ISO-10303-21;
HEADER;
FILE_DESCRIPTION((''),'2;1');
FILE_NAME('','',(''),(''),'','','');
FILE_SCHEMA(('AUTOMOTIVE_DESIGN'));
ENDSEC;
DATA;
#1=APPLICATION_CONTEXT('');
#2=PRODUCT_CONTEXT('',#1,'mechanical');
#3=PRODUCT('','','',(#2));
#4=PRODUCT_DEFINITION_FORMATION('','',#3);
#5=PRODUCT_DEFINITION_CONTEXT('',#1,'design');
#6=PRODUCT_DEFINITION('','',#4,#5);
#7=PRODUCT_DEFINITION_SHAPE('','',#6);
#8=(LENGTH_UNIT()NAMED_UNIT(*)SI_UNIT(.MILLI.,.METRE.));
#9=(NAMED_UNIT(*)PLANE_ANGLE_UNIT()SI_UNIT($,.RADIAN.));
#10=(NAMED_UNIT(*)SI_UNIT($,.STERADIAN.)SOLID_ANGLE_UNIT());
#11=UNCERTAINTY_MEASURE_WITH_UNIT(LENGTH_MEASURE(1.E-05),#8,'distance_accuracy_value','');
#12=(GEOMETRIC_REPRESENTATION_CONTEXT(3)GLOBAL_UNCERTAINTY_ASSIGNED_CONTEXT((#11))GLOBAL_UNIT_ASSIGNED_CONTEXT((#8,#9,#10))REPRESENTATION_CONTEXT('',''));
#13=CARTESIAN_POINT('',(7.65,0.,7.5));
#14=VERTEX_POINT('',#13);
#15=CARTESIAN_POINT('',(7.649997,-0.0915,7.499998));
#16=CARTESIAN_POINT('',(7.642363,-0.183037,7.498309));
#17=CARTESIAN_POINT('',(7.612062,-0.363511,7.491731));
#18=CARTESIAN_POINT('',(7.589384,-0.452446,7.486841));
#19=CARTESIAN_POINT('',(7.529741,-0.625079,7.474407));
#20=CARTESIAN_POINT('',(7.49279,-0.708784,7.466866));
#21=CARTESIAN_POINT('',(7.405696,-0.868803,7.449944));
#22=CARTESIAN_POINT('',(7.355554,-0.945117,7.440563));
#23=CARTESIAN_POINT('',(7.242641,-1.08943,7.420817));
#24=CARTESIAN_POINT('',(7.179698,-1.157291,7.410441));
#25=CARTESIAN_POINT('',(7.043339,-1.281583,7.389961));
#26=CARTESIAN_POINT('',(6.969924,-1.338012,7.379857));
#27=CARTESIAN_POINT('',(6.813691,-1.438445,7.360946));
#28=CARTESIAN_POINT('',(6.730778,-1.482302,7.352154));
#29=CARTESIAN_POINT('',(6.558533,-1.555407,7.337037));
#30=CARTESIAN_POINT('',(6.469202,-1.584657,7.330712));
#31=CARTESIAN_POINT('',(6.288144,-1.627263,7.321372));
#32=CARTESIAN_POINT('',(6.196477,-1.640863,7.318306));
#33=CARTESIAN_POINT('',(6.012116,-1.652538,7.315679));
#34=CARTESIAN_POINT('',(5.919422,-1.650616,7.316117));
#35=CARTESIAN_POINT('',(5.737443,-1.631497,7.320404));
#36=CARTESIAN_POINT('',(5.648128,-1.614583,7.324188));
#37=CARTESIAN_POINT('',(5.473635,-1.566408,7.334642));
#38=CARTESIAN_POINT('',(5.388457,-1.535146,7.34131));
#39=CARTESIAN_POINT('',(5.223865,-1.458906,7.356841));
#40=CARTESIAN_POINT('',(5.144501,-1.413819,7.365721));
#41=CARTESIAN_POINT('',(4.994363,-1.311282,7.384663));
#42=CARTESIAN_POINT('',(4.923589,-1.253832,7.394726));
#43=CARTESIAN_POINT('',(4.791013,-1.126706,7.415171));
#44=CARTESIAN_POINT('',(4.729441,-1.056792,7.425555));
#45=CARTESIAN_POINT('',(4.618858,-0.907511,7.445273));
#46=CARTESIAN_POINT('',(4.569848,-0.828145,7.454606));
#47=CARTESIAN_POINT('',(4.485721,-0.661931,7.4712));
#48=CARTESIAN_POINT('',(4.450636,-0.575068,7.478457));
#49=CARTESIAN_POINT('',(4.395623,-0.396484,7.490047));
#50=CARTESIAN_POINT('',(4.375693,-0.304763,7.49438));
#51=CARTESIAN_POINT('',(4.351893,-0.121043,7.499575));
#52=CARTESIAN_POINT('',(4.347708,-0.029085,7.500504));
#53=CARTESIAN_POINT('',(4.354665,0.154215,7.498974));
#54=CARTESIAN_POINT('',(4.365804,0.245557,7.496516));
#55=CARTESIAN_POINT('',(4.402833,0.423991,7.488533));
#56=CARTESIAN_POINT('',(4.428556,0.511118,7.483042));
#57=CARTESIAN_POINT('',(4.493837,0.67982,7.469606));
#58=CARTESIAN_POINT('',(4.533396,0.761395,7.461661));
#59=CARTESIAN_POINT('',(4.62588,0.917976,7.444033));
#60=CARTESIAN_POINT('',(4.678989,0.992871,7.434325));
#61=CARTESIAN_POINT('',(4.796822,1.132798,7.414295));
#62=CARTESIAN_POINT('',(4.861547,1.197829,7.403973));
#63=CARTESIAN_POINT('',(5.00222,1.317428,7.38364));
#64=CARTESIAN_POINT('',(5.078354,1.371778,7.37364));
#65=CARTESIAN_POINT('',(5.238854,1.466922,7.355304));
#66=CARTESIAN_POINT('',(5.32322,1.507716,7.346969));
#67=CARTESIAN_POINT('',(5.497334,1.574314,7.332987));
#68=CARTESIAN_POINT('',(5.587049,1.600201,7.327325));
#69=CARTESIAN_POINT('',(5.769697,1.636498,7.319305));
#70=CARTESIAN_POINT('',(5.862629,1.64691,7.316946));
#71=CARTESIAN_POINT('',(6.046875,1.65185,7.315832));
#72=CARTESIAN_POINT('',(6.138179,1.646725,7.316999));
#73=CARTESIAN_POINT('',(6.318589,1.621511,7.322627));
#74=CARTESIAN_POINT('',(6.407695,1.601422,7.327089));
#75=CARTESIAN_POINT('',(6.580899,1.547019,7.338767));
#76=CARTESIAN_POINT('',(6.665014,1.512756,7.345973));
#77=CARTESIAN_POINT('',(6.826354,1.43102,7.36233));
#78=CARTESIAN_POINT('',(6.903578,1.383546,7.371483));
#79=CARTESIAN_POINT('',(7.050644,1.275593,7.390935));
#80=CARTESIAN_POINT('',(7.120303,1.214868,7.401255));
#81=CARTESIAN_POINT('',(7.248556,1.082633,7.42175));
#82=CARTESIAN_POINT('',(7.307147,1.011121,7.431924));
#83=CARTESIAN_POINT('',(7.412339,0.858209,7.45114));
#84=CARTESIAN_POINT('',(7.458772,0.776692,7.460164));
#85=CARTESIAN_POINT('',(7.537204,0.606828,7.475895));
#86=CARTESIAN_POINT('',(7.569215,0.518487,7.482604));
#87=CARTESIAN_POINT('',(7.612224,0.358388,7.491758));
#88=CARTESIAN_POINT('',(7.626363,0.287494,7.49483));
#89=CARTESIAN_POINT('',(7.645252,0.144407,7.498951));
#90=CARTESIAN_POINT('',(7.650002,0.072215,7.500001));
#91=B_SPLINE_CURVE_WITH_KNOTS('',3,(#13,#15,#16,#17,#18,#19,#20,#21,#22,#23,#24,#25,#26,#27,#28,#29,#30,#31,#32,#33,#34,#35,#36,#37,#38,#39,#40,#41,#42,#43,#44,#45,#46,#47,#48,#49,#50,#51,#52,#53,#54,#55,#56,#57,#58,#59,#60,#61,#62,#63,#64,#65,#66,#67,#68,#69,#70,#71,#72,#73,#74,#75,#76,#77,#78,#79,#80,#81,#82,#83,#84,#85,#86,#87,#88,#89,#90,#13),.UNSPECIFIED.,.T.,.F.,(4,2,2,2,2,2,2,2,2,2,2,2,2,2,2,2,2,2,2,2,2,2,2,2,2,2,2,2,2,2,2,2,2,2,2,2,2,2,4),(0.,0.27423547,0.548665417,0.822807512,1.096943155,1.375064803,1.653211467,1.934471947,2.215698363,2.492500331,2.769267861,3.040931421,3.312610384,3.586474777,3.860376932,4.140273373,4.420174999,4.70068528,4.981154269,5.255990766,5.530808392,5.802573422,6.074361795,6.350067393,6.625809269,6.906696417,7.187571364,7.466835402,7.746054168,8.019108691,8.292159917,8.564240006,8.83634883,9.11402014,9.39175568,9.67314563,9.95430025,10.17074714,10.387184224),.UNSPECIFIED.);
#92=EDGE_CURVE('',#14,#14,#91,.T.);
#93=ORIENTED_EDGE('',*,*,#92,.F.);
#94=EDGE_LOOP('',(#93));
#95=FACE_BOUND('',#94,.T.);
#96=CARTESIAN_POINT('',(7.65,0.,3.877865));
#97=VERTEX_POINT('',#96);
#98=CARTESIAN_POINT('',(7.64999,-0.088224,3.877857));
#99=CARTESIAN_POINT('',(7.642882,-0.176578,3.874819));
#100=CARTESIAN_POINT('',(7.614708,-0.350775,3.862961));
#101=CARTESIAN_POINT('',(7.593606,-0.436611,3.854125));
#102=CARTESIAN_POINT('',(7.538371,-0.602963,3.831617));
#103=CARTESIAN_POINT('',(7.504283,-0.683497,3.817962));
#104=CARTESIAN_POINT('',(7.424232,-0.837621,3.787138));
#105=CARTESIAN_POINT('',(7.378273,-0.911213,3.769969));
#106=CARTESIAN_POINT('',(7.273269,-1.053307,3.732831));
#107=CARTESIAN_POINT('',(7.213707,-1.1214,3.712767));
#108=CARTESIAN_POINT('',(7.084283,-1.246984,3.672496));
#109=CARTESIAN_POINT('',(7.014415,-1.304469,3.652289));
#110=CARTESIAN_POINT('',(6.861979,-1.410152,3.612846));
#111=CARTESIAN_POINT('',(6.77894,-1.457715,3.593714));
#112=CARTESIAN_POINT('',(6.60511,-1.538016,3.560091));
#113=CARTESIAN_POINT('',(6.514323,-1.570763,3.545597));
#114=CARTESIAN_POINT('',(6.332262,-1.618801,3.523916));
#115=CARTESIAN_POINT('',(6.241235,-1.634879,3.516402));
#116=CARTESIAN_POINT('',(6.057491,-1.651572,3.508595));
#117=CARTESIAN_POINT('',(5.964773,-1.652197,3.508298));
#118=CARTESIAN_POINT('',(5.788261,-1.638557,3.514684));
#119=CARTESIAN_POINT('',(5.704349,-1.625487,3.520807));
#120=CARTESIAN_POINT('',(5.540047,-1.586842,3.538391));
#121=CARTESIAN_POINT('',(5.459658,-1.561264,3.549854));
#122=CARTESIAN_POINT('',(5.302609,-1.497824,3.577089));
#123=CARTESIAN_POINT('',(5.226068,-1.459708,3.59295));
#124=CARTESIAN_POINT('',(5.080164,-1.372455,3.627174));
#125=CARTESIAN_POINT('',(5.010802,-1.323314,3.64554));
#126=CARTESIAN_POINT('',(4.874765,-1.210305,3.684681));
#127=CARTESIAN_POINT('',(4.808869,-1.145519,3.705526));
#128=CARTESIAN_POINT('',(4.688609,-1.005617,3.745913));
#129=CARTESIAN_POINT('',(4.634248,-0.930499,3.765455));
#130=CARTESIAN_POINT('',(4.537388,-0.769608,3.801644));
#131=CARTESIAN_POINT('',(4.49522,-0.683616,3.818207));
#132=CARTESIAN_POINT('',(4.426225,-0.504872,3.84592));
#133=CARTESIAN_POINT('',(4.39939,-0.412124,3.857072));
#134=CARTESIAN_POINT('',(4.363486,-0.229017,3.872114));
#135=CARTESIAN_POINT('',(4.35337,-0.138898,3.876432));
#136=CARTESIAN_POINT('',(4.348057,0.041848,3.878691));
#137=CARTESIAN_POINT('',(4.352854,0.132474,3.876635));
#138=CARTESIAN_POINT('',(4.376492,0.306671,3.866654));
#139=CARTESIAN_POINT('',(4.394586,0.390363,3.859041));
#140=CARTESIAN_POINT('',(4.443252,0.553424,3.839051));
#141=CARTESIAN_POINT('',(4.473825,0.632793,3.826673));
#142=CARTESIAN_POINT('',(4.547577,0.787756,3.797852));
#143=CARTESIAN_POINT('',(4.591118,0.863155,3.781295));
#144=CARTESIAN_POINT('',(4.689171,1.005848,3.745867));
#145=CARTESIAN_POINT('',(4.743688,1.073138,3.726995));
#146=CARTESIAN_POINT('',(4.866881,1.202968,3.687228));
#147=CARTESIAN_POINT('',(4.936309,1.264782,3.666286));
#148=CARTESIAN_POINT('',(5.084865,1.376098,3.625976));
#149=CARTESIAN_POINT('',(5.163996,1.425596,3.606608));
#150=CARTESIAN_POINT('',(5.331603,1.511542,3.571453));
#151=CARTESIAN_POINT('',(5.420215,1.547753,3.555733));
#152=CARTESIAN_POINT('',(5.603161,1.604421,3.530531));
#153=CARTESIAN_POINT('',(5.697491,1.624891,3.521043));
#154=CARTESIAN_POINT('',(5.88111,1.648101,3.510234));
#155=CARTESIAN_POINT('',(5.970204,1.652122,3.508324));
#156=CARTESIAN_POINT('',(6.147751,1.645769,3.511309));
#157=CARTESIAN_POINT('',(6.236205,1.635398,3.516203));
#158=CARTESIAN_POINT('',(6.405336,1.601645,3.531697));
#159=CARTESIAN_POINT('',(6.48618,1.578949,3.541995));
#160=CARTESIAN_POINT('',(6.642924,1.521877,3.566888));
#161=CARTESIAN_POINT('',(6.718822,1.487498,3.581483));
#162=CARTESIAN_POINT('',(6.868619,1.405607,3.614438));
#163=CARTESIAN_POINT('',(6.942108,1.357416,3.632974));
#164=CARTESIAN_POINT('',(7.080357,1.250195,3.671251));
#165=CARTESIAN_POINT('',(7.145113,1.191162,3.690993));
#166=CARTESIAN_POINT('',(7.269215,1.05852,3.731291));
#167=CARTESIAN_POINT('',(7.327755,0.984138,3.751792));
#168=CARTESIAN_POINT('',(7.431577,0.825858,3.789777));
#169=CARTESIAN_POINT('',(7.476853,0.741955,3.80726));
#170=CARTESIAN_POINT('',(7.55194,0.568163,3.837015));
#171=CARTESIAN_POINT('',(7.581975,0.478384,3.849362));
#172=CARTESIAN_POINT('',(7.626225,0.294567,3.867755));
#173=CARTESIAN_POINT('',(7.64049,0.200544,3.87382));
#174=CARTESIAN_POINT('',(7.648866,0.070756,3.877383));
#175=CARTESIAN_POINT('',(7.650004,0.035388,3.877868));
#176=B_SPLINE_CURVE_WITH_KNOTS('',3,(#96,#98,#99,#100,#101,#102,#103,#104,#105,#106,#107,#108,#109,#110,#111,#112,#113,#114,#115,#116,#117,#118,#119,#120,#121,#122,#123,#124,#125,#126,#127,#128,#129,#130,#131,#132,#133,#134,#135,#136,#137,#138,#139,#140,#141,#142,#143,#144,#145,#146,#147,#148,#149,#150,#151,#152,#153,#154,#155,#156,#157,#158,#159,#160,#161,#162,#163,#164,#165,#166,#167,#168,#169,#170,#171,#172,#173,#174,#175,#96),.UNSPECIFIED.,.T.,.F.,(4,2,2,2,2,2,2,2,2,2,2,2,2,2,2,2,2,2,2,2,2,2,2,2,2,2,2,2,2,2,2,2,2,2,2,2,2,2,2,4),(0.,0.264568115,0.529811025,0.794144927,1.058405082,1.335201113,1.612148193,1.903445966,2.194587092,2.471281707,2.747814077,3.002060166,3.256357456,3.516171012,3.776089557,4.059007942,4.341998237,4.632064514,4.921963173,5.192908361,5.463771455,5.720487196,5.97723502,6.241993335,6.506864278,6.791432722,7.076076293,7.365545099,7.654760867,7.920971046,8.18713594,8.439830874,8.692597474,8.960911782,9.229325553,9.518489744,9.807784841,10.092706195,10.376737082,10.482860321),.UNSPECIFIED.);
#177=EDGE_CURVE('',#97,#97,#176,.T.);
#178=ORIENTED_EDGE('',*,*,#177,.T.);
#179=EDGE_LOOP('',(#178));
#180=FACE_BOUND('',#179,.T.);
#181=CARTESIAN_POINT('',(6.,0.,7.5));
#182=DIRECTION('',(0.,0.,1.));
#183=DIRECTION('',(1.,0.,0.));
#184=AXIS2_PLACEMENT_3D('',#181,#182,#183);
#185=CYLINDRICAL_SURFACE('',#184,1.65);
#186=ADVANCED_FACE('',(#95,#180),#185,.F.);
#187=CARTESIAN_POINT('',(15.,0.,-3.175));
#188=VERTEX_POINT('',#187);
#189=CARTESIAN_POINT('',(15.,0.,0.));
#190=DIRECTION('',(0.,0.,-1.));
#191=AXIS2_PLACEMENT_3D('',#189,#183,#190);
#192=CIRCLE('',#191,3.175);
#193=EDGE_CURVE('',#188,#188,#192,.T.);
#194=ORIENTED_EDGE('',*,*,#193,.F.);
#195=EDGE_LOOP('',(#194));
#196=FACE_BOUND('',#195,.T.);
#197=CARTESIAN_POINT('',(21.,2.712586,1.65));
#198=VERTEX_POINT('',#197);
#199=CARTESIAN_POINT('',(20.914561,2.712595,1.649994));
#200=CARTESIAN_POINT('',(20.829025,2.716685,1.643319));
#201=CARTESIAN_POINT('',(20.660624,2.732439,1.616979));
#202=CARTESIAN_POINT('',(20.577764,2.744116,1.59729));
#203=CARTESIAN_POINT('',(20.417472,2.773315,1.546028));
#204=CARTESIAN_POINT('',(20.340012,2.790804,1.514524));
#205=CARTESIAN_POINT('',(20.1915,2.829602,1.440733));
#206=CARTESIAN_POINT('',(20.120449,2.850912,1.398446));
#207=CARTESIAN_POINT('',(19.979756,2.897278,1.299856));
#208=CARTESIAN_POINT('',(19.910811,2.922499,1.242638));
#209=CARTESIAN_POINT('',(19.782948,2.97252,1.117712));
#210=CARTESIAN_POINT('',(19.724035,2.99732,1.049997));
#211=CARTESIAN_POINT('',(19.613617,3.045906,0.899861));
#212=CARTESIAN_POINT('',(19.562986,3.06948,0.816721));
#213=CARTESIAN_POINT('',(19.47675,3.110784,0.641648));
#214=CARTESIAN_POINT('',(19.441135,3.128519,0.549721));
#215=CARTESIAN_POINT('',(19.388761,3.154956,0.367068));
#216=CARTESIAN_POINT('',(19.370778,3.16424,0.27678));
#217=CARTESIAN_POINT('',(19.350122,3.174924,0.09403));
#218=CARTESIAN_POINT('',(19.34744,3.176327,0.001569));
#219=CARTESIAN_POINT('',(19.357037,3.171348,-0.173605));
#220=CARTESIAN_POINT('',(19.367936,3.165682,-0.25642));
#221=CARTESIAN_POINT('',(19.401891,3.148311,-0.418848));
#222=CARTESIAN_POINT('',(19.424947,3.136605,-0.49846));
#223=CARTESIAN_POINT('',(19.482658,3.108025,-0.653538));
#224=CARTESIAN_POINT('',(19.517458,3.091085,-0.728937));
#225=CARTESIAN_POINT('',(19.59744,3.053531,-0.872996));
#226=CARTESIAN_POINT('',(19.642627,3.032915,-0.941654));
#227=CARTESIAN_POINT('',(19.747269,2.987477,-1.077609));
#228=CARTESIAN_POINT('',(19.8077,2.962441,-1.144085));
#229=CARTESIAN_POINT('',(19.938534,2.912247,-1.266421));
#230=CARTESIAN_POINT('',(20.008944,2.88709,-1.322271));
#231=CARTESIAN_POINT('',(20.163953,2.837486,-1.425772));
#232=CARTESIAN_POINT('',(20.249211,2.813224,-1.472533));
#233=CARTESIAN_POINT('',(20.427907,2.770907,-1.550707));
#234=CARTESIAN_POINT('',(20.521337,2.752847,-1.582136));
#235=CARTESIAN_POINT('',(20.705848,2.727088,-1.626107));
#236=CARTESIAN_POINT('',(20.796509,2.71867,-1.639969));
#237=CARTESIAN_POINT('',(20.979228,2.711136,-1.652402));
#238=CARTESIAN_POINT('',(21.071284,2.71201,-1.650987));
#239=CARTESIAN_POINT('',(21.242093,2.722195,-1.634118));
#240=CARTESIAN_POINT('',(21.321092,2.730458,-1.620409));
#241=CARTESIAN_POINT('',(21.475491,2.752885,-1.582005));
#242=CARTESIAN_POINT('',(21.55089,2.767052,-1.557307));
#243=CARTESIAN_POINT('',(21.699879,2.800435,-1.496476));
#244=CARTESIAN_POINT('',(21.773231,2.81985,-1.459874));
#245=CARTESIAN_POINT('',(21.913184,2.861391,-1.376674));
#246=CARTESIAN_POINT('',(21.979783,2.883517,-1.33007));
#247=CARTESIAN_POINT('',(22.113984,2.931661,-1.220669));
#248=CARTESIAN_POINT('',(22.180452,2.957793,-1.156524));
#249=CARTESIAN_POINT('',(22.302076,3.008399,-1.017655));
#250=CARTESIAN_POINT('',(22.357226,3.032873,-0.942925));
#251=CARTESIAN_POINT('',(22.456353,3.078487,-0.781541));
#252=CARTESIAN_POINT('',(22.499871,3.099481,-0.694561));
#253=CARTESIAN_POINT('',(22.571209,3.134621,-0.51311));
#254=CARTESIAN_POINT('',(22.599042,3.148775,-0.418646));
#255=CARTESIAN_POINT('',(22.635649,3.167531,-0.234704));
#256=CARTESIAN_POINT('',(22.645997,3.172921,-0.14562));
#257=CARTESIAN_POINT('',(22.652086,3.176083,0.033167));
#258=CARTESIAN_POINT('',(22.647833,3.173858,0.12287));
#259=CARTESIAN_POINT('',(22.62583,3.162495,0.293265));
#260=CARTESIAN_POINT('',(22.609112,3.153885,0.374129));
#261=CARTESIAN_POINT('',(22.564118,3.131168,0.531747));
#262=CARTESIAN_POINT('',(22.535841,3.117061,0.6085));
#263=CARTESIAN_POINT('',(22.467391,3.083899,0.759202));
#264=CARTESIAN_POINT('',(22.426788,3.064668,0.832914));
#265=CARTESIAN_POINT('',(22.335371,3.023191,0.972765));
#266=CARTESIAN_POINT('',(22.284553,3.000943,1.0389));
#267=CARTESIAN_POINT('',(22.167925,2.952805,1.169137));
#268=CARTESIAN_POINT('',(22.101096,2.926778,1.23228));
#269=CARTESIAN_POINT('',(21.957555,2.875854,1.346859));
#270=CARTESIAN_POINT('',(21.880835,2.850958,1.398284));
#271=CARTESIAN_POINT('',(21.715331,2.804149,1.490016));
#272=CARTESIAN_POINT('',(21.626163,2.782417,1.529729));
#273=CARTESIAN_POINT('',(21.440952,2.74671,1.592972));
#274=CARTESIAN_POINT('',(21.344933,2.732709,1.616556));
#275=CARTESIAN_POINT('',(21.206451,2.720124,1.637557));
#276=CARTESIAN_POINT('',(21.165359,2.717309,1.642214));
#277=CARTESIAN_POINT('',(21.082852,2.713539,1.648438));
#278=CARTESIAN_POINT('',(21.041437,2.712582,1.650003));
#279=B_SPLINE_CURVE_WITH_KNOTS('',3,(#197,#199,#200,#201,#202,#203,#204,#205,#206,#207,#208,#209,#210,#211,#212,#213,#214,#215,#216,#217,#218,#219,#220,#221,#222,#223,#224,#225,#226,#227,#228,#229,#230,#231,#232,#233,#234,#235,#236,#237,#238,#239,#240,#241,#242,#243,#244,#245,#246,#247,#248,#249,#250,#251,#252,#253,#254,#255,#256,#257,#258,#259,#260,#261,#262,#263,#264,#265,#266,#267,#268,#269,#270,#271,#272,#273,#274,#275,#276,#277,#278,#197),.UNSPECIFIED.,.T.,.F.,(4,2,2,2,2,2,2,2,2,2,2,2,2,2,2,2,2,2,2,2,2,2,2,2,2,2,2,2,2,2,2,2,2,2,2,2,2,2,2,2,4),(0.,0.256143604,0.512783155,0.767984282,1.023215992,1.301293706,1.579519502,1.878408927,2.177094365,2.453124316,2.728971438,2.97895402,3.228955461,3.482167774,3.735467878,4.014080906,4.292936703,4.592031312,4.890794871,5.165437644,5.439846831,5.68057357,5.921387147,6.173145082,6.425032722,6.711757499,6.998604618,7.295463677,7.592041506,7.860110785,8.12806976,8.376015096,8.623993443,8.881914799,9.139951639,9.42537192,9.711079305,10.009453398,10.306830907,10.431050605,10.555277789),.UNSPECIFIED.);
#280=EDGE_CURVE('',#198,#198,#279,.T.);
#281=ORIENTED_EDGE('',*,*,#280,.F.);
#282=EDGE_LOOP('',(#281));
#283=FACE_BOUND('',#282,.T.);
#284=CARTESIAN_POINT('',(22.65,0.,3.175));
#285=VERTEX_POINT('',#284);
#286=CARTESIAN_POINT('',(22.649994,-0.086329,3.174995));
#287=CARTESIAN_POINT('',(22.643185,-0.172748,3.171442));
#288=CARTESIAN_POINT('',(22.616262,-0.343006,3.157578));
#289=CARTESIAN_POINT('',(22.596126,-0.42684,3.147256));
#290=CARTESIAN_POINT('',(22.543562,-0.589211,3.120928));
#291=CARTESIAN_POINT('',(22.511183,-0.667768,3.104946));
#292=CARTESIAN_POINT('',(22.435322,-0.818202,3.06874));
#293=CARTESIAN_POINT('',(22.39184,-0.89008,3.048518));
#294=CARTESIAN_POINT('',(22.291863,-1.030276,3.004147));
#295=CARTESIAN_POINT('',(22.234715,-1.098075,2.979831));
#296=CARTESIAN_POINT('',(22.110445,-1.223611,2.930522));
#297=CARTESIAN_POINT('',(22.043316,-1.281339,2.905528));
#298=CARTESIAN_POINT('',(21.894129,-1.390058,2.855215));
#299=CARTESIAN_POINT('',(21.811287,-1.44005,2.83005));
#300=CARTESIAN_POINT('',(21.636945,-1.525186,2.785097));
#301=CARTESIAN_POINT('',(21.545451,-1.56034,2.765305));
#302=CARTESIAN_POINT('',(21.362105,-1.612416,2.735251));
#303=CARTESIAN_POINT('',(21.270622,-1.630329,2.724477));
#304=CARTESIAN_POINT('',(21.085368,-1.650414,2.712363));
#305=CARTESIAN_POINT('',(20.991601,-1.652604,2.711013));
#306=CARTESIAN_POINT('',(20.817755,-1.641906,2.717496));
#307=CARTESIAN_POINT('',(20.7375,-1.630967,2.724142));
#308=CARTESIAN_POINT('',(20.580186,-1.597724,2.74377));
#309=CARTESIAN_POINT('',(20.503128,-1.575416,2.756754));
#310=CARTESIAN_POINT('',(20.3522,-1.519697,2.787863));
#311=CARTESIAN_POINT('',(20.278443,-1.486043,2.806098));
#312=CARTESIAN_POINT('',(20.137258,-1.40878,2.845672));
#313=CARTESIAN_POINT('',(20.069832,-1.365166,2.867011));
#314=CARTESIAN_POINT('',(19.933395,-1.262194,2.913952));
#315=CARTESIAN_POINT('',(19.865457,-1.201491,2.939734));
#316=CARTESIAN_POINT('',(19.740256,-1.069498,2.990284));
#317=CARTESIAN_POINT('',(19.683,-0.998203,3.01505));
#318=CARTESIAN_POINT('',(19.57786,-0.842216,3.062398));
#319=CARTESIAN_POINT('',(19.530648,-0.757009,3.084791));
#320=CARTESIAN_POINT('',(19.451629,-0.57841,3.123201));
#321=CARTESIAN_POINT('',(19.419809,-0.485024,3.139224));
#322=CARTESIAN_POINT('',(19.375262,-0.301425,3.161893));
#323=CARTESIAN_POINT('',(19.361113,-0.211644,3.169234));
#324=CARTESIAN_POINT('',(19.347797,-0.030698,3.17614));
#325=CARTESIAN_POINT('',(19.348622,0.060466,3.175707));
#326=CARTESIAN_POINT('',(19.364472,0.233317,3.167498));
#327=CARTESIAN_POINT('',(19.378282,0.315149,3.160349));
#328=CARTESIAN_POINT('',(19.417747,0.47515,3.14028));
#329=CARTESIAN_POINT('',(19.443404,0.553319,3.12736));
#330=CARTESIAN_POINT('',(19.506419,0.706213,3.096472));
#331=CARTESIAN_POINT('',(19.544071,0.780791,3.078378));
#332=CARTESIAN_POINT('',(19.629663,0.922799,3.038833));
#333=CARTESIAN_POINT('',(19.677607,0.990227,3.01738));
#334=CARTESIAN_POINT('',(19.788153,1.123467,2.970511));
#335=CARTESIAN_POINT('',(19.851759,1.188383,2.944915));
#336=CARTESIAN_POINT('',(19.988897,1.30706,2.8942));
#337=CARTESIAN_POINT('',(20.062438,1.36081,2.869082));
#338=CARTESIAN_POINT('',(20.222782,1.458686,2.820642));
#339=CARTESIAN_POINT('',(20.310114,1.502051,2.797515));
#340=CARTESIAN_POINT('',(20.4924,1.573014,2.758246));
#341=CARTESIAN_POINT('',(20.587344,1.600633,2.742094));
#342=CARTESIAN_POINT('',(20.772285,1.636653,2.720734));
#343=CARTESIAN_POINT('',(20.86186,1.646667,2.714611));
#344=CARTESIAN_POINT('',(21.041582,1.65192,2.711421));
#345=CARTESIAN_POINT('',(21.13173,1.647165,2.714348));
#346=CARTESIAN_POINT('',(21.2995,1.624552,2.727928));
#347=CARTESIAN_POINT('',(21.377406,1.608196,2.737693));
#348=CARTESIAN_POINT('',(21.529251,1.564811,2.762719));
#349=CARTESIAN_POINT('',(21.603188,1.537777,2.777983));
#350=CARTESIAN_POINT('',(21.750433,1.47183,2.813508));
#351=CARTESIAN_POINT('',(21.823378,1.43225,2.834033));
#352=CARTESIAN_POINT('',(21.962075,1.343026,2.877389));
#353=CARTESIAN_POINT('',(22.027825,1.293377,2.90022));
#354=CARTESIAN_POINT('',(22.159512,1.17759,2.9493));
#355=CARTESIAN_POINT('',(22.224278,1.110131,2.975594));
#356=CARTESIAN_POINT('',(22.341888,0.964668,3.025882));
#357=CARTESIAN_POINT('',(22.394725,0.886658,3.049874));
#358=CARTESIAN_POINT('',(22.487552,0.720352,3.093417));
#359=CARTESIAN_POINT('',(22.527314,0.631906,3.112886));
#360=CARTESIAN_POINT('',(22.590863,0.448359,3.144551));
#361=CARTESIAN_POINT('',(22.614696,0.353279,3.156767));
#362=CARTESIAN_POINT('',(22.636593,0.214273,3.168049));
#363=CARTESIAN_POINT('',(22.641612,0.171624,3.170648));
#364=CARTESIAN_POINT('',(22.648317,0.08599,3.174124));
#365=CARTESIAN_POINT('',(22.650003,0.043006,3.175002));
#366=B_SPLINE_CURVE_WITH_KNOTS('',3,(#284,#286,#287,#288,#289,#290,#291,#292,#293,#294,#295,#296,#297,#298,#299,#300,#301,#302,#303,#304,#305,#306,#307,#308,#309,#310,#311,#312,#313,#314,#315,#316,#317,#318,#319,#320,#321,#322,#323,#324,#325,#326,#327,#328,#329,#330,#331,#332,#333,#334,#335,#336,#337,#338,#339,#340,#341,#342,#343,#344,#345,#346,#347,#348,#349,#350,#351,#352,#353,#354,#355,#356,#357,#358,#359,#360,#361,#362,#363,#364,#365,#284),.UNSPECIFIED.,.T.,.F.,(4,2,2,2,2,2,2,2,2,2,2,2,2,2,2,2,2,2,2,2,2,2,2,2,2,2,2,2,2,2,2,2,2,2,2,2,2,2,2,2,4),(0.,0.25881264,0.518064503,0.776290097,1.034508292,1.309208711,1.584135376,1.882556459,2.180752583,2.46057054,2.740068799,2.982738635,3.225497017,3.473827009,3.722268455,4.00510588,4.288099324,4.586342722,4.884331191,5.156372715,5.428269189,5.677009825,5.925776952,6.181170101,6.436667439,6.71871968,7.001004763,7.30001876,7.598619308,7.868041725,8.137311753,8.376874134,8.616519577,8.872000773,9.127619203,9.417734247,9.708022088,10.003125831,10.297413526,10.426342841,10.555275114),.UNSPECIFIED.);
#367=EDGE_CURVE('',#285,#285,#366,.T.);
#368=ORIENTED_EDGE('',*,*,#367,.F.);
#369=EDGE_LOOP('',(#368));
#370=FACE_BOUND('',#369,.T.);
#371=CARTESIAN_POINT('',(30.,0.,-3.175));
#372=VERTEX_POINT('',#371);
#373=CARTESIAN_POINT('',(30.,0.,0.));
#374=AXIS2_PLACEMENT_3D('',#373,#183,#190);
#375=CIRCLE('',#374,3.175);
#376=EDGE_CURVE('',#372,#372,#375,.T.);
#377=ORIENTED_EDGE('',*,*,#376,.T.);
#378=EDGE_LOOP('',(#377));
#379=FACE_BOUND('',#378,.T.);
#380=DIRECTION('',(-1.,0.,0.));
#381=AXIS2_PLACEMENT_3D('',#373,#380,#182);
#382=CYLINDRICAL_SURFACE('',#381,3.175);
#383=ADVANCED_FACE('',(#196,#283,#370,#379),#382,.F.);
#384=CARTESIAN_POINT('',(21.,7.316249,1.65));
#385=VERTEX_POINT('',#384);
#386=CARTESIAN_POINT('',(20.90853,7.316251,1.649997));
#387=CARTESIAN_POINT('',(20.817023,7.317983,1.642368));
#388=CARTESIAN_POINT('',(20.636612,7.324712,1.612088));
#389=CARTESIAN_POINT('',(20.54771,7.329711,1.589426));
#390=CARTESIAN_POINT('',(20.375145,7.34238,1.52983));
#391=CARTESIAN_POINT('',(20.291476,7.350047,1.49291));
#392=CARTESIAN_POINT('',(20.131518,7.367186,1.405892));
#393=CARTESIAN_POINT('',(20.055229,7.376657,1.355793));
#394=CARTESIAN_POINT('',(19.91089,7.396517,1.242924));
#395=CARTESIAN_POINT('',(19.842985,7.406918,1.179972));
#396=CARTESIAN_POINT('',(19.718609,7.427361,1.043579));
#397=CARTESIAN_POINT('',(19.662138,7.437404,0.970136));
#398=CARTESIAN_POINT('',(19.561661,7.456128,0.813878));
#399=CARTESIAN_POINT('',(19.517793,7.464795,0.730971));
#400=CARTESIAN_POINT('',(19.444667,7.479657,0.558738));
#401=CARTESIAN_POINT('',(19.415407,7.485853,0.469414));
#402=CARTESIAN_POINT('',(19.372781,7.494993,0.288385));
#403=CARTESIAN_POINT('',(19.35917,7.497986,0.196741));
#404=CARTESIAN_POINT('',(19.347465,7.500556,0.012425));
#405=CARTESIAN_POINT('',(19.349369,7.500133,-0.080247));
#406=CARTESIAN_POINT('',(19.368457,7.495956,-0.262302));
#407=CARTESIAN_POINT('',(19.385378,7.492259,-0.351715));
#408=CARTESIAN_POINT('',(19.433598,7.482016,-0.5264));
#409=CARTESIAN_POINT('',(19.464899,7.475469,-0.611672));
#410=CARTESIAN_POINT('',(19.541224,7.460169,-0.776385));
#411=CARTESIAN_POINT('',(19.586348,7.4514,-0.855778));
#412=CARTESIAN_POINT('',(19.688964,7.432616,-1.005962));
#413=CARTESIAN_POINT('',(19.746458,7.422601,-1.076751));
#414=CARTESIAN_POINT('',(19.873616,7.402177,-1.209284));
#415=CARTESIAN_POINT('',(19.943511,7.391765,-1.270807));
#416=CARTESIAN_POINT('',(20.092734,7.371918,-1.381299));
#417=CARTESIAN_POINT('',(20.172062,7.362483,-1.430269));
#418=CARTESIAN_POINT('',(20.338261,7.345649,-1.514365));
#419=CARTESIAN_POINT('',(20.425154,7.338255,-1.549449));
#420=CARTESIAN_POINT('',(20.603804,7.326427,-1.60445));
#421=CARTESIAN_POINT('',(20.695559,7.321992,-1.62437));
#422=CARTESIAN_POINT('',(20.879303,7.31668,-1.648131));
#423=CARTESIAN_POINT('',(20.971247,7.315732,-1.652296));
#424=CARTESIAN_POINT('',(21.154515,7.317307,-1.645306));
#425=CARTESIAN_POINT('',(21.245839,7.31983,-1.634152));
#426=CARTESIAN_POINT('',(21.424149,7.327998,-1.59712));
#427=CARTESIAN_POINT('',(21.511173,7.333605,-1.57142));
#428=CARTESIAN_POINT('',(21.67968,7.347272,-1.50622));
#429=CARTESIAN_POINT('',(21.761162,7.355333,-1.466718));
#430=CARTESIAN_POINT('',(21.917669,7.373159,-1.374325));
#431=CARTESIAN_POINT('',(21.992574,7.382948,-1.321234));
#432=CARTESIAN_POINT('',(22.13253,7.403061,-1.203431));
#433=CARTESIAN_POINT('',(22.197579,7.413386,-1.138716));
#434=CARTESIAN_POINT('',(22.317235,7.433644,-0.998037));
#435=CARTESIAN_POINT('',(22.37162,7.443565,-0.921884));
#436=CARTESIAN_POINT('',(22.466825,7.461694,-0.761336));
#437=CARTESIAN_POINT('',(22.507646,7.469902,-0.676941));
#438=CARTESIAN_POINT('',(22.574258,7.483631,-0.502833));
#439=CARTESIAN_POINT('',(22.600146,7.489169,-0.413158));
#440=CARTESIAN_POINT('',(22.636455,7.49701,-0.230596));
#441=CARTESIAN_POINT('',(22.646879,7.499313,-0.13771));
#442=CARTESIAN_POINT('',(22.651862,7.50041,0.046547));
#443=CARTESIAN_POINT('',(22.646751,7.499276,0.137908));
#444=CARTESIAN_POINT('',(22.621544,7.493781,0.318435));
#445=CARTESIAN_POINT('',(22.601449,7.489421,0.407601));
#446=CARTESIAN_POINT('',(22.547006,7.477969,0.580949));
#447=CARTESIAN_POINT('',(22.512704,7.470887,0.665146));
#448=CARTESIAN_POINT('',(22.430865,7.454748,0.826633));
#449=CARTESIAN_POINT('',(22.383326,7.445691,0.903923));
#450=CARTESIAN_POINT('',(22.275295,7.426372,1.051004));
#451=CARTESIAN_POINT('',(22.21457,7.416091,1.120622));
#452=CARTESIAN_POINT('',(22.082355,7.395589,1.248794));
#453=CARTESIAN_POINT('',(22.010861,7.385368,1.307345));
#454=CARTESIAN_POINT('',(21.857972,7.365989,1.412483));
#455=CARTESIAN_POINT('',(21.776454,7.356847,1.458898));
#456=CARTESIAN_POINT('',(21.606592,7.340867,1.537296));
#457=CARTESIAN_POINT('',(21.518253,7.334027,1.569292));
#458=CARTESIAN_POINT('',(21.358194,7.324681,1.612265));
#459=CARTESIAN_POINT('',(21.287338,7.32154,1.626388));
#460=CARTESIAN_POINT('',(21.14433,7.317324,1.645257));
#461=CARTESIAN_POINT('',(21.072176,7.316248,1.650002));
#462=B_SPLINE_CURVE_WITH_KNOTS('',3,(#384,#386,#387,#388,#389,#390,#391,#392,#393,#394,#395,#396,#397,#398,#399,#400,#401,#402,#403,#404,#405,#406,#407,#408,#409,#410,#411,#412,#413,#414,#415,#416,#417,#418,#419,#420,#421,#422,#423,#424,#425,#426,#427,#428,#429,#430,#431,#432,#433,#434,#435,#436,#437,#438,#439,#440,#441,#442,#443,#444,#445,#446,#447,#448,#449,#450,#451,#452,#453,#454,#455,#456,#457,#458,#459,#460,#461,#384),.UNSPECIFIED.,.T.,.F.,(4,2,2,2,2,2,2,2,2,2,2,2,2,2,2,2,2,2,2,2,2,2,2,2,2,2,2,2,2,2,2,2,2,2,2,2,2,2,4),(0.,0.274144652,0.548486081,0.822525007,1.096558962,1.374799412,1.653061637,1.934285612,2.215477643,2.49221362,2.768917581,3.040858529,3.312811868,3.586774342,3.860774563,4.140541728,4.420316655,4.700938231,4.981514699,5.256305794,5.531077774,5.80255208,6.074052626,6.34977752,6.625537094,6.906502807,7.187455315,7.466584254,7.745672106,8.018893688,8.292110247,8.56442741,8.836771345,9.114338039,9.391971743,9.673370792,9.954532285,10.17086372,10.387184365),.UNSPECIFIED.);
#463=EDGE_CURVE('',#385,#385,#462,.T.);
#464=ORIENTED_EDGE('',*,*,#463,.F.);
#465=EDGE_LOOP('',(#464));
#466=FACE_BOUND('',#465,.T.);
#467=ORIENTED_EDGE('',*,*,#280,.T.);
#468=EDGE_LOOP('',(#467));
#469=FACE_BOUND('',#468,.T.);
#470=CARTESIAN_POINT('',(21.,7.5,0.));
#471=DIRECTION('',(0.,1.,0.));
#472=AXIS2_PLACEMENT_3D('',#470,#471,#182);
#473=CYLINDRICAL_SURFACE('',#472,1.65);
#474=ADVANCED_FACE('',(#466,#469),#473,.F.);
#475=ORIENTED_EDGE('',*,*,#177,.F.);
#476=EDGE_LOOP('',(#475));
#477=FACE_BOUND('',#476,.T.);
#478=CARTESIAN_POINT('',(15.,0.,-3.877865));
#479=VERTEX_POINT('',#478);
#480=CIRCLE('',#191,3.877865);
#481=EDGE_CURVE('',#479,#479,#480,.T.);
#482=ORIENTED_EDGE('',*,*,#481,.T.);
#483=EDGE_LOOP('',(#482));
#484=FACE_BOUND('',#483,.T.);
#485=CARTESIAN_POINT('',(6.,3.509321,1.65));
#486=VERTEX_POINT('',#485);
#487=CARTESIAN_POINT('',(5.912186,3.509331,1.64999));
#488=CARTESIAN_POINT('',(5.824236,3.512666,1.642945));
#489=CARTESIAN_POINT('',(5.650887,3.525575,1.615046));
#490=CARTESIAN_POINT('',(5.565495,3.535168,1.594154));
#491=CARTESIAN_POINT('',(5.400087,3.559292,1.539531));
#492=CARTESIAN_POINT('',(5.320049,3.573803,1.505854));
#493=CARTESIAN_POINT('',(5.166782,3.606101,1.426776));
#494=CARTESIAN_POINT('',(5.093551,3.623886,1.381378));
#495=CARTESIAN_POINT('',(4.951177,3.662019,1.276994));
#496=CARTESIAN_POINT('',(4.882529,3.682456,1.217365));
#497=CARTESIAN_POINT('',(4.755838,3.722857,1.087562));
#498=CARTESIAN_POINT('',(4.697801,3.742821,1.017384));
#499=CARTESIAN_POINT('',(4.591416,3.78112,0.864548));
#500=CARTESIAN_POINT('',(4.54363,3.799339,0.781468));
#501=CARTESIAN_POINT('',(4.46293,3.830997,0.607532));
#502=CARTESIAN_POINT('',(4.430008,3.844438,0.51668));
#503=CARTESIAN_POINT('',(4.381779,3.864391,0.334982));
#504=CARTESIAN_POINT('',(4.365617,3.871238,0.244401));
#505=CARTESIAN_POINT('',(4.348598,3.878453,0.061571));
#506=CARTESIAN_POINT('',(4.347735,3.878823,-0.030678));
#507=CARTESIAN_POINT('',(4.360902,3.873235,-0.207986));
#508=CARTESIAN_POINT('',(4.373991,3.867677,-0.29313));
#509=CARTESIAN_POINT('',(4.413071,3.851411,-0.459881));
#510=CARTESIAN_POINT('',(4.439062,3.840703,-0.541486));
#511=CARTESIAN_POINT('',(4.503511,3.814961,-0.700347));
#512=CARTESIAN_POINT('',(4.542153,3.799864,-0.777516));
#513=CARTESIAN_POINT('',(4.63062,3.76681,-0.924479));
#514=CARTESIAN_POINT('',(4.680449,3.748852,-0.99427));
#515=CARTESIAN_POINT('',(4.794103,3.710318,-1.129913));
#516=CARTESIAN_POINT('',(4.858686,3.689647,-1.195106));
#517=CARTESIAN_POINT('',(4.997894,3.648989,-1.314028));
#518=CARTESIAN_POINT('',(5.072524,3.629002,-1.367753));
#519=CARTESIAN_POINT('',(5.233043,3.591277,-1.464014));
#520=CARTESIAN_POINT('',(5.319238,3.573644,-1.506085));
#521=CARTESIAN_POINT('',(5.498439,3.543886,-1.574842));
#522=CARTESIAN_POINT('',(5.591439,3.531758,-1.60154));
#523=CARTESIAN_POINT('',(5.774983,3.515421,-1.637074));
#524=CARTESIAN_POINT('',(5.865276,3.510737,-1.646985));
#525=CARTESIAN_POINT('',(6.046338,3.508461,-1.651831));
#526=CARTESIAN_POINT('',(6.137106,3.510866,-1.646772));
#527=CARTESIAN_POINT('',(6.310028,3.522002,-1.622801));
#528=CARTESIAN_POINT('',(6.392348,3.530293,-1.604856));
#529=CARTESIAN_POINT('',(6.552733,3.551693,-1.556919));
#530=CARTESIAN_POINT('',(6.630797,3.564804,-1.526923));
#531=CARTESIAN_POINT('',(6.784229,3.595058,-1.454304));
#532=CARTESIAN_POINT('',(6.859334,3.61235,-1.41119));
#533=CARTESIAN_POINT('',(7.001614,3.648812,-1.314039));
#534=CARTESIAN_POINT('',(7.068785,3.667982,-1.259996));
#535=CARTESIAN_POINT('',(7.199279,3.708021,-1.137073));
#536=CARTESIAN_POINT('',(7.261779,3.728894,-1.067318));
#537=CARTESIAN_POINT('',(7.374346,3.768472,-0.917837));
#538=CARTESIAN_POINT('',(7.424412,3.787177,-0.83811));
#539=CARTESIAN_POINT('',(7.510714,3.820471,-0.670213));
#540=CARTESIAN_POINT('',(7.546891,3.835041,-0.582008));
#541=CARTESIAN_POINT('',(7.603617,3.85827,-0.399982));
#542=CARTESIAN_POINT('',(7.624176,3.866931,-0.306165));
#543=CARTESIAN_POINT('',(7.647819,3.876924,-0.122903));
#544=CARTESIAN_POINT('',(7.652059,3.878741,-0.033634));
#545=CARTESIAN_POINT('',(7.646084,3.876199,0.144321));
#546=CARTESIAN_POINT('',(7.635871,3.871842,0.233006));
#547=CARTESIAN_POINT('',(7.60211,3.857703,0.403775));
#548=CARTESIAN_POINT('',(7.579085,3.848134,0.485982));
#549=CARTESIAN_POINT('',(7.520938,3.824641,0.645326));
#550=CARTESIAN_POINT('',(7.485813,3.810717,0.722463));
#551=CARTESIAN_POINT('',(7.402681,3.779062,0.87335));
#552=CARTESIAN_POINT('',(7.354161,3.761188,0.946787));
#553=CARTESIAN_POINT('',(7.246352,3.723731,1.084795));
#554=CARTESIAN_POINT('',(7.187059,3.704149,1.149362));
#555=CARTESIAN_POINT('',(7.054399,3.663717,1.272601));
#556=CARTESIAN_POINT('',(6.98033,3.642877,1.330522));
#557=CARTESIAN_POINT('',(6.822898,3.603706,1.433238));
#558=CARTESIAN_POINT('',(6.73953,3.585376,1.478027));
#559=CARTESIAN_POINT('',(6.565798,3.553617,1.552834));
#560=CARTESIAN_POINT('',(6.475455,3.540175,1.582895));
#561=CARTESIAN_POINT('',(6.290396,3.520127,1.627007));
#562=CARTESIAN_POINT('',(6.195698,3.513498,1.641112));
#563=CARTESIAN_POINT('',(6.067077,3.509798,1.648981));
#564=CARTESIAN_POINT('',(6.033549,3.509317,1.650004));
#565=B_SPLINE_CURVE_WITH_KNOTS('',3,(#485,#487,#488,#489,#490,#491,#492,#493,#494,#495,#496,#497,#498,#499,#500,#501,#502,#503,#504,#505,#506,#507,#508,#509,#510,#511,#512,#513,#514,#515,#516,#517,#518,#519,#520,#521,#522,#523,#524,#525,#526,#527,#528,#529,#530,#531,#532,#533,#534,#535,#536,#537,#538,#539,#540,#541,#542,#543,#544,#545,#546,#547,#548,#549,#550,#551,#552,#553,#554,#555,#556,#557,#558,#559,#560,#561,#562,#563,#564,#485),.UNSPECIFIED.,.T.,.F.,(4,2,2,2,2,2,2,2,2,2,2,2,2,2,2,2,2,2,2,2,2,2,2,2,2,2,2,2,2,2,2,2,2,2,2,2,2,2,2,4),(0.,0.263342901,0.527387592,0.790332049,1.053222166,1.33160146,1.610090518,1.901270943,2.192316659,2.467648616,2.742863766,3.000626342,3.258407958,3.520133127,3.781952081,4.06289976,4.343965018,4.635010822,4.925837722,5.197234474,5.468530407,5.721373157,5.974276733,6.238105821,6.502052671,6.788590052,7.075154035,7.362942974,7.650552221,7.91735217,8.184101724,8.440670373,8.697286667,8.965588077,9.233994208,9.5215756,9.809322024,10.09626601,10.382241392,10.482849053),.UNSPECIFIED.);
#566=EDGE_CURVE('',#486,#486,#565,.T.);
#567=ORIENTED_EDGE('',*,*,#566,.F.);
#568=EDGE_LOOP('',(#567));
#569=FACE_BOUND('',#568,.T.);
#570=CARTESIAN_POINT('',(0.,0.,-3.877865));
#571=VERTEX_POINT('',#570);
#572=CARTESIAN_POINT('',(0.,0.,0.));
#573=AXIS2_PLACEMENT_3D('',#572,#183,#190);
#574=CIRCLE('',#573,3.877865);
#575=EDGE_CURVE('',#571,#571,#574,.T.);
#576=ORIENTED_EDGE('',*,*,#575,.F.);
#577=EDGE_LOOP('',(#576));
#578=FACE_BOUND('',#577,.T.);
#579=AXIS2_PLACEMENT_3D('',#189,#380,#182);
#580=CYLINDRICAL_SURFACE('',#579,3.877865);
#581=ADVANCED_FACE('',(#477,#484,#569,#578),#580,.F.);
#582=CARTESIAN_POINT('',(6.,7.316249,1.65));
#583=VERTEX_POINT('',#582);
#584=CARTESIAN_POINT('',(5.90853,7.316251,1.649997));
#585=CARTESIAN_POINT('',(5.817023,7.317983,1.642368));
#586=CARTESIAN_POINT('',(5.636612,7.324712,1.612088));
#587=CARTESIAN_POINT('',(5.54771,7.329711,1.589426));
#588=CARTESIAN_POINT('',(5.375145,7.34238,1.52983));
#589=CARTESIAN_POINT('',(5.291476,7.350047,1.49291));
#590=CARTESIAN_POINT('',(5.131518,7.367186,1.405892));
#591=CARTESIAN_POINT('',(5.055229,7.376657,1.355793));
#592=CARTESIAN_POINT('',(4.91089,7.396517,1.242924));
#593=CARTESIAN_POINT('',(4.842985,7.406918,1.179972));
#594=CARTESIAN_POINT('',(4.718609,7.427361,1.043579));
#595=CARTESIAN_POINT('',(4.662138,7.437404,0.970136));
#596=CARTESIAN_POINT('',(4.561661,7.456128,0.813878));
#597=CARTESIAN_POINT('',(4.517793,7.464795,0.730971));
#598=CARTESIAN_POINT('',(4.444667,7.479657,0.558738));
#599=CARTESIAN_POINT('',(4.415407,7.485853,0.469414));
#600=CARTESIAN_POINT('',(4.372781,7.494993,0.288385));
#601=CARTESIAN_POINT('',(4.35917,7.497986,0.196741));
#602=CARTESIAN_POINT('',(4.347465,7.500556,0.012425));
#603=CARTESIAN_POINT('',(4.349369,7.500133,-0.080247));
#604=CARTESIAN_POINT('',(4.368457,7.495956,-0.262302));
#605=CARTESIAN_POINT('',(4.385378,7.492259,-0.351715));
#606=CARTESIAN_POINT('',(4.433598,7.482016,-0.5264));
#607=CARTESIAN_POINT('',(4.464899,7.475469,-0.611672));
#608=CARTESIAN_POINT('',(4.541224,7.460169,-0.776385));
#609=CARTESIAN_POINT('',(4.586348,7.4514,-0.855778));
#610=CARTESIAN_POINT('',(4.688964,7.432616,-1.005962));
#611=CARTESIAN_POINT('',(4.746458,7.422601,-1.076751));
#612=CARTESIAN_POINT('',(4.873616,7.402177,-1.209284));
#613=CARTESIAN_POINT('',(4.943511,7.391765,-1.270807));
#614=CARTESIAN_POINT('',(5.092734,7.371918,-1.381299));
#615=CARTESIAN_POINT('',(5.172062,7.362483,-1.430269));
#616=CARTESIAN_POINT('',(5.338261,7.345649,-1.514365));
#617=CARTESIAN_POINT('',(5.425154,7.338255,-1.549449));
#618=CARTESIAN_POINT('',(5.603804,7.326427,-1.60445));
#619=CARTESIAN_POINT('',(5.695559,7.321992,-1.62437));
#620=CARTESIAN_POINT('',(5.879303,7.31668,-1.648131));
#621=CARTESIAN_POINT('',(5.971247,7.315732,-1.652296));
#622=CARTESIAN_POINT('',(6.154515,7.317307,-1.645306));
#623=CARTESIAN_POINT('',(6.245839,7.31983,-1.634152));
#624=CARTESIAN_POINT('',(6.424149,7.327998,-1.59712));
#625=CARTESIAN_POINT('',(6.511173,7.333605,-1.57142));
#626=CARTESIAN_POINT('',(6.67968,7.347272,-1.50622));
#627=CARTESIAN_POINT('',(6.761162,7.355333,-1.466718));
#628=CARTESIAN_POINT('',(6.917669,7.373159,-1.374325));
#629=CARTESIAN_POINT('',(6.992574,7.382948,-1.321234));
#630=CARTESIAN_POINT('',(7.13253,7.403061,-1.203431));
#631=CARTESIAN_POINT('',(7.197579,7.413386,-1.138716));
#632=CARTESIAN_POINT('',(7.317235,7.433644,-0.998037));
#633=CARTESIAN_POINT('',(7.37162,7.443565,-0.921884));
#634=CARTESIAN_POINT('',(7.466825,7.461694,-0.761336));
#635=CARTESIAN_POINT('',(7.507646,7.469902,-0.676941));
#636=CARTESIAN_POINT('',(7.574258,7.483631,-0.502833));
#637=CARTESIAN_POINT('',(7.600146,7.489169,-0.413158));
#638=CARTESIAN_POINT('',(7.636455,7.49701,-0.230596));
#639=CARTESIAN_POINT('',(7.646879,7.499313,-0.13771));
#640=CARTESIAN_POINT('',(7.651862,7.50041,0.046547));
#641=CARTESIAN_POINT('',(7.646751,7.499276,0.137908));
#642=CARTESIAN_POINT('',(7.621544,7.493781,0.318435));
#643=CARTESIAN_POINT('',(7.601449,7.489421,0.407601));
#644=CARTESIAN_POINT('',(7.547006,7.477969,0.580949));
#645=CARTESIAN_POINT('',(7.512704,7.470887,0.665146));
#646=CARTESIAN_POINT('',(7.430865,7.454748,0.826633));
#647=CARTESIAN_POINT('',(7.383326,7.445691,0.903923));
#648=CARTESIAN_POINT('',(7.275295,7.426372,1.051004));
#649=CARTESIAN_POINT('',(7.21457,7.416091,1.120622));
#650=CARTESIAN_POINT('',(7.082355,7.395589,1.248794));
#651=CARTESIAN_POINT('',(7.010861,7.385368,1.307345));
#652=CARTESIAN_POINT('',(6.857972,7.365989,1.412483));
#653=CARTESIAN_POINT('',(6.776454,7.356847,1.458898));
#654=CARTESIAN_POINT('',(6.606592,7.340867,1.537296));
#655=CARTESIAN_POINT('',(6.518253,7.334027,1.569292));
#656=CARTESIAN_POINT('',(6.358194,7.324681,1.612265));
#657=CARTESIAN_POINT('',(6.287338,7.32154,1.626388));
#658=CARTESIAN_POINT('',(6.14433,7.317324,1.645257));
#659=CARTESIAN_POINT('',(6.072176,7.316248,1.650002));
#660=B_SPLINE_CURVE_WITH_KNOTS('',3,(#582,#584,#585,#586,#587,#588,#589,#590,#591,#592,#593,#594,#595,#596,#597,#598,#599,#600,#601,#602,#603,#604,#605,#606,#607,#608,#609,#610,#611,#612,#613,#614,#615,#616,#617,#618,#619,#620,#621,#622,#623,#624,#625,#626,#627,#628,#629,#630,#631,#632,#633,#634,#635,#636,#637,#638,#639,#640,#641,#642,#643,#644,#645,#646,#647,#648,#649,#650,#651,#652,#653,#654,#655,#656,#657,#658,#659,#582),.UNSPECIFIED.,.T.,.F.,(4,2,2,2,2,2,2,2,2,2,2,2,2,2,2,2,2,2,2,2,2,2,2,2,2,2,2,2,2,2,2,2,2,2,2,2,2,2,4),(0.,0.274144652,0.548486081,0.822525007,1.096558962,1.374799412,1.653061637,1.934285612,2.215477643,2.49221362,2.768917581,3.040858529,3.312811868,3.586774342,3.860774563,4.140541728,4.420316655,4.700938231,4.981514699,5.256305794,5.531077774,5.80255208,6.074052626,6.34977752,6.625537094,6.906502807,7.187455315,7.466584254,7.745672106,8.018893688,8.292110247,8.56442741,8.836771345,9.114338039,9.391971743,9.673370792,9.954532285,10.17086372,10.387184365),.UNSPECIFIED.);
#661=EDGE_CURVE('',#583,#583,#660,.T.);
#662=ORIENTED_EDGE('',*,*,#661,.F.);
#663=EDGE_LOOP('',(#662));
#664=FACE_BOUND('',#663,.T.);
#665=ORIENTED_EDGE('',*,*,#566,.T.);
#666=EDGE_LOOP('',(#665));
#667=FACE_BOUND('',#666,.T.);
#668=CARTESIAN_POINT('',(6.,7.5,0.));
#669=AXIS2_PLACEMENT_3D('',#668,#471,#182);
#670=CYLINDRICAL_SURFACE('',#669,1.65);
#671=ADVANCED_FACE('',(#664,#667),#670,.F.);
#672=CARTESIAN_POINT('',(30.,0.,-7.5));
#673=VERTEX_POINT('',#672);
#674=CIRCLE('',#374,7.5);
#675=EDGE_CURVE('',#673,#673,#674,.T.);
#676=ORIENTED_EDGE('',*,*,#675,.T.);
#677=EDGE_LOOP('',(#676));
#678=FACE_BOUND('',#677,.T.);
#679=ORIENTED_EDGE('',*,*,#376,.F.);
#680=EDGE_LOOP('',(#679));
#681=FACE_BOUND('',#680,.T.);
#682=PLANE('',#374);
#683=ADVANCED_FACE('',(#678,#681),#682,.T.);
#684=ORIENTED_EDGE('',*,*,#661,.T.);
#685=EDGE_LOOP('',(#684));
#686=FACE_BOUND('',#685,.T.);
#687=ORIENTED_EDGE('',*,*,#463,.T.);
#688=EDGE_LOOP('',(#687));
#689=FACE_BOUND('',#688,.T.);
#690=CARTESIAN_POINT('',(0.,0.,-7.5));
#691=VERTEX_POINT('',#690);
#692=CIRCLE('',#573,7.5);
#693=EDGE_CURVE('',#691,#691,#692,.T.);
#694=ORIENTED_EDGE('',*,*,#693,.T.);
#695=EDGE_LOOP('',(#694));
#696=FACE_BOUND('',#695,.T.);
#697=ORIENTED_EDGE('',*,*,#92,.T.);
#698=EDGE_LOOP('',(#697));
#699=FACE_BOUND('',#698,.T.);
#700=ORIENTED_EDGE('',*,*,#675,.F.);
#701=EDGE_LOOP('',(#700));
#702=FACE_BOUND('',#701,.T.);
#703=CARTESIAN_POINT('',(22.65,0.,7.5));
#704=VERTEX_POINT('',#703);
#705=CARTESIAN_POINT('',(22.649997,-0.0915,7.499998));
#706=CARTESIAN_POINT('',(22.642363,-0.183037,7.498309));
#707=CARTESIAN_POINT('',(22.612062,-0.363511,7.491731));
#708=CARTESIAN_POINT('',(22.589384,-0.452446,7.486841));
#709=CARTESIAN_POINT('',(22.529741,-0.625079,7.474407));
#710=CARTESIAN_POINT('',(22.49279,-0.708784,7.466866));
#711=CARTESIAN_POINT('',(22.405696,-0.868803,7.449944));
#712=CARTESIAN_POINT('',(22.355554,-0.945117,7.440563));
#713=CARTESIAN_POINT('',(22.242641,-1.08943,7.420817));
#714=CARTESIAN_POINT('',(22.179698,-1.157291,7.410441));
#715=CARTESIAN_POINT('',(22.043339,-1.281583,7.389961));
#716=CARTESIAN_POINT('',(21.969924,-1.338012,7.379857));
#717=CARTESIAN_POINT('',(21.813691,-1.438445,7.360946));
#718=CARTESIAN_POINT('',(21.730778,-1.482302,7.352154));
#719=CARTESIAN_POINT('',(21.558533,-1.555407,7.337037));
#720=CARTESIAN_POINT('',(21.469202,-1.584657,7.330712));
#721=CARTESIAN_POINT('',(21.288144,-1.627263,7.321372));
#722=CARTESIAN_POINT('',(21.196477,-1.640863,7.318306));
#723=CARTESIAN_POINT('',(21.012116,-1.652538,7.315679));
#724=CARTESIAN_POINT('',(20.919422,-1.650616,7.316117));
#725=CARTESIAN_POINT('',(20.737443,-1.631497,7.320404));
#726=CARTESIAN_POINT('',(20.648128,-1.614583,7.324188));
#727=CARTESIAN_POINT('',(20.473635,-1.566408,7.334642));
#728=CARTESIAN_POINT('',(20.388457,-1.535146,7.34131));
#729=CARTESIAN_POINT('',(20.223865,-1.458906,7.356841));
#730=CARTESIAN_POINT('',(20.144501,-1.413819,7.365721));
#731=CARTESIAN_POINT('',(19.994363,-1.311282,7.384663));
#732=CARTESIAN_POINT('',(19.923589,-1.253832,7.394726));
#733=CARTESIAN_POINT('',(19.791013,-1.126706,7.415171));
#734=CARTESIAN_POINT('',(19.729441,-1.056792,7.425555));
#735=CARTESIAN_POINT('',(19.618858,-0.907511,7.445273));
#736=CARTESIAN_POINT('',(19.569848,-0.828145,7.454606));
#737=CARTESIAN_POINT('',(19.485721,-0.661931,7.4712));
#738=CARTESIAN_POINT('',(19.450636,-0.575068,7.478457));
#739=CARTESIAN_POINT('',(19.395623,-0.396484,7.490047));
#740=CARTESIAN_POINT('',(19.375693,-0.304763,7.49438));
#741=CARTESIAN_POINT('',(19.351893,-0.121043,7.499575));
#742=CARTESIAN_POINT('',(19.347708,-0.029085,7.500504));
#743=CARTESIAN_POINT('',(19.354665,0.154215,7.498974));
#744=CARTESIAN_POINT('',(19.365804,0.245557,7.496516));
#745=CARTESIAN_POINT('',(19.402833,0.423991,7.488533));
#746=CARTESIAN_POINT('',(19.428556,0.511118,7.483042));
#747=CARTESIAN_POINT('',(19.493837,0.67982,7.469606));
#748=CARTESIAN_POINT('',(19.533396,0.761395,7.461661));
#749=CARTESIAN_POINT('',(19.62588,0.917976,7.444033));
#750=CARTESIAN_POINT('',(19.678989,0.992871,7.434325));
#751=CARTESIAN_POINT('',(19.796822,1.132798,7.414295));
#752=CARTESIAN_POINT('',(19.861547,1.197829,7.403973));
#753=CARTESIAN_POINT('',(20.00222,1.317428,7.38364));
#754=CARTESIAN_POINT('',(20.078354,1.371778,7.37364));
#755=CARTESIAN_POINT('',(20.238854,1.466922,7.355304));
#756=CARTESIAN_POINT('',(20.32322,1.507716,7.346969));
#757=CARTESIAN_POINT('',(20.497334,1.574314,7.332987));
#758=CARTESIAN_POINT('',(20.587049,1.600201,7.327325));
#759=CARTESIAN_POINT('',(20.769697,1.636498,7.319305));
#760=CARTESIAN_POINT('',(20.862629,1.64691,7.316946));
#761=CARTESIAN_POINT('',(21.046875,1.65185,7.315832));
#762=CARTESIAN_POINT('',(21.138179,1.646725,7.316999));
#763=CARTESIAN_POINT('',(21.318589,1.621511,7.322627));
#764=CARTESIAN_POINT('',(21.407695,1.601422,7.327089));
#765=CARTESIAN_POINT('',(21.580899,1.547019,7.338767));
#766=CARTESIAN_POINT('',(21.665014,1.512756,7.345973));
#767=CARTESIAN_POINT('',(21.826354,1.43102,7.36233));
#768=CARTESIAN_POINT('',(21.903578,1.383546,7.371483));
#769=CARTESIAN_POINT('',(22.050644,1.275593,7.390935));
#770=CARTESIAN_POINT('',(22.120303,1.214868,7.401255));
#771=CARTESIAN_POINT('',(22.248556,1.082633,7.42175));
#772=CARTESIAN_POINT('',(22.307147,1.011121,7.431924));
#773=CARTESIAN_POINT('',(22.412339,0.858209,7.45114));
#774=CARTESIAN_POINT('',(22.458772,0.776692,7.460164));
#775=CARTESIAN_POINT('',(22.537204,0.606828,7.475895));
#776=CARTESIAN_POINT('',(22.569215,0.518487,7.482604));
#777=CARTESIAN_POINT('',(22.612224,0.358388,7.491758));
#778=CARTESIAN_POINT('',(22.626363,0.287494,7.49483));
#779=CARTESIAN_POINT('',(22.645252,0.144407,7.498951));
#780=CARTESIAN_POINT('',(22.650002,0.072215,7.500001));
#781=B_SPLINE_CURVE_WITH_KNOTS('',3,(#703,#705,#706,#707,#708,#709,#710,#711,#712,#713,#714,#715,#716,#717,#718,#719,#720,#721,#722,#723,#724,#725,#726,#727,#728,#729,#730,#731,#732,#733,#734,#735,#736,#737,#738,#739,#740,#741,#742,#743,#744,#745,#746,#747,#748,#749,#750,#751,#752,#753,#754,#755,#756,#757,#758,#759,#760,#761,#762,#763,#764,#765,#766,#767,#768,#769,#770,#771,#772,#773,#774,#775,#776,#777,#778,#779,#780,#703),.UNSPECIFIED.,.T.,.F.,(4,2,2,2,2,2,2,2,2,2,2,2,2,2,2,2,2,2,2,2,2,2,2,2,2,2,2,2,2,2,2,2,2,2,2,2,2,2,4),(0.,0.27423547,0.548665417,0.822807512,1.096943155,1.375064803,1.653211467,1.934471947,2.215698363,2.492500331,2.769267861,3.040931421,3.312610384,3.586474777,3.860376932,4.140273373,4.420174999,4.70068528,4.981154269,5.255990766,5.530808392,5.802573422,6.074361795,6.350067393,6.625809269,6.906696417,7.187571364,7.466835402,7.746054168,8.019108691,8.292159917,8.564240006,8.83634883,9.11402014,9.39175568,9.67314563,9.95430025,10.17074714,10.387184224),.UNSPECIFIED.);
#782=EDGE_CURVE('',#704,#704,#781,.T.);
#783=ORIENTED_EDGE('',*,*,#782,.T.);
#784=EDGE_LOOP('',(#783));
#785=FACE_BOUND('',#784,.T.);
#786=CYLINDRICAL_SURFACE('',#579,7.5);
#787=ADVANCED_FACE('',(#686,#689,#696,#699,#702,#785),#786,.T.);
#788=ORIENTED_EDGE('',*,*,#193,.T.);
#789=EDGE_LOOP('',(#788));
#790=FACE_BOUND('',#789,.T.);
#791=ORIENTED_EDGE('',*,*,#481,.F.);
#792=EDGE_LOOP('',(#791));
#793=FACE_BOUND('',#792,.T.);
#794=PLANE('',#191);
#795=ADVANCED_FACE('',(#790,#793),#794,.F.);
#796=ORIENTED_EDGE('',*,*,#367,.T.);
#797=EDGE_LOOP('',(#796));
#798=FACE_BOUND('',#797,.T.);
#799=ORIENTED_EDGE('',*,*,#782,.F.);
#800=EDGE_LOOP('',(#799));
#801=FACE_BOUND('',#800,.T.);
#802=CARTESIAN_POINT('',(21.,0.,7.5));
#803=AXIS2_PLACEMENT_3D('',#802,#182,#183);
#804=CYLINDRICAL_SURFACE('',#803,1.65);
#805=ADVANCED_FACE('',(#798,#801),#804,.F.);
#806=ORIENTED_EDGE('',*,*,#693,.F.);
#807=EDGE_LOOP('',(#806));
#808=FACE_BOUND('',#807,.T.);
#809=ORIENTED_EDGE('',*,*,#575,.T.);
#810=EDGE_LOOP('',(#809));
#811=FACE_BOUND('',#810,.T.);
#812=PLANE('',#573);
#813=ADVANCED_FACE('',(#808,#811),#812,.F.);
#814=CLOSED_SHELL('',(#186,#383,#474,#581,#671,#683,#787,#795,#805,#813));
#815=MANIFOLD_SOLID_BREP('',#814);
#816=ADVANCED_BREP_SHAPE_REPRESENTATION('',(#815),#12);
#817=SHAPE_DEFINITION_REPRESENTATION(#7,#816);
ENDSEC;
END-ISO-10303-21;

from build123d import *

# Parameters (mm, degrees)
CROQUIS1_R              = 7.5
CROQUIS1_R_2            = 3.877864762
SALIENTE_EXTRUIR1_DEPTH = 15
CROQUIS3_R              = 7.5
CROQUIS3_R_2            = 3.175
SALIENTE_EXTRUIR2_DEPTH = 15


with BuildPart() as part:
    # Croquis1 → Saliente-Extruir1 (new body)
    with BuildSketch(Plane(origin=(0, 0, 0), x_dir=(0, 0, -1), z_dir=(1, 0, 0))):
        Circle(CROQUIS1_R)
        Circle(CROQUIS1_R_2, mode=Mode.SUBTRACT)
    extrude(amount=SALIENTE_EXTRUIR1_DEPTH)

    # Croquis3 → Saliente-Extruir2 (add)
    with BuildSketch(Plane(origin=(15, 0, 0), x_dir=(0, 0, -1), z_dir=(1, 0, 0))):
        Circle(CROQUIS3_R)
        Circle(CROQUIS3_R_2, mode=Mode.SUBTRACT)
    extrude(amount=SALIENTE_EXTRUIR2_DEPTH)

    # Croquis5 → Perforador para roscar para macho de roscar para M4x0.72 (revolve, cut)
    with BuildSketch(Plane(origin=(6, 7.5, 0), x_dir=(0, 0, 1), z_dir=(1, 0, 0))):
        Polygon((0, 0), (0, 8.491420021), (1.65, 7.5), (1.65, 0), align=None)
    revolve(axis=Axis((6, 13.85, 0), (0, -1, 0)), mode=Mode.SUBTRACT)

    # Croquis5 at point 2 (carried to point 2, square into its face) → Perforador para roscar para macho de 2 (revolve, cut)
    with BuildSketch(Plane(origin=(6, 0, 7.5), x_dir=(0, -1, 0), z_dir=(1, 0, 0))):
        Polygon((0, 0), (0, 8.491420021), (1.65, 7.5), (1.65, 0), align=None)
    revolve(axis=Axis((6, 0, 13.85), (0, 0, -1)), mode=Mode.SUBTRACT)

    # Croquis5 at point 3 (carried to point 3, square into its face) → Perforador para roscar para macho de 3 (revolve, cut)
    with BuildSketch(Plane(origin=(-116.474048572, 0, -29.182020138), x_dir=(0, 0, 1), z_dir=(1, 0, 0))):
        Polygon((0, 0), (0, 8.491420021), (1.65, 7.5), (1.65, 0), align=None)
    revolve(axis=Axis((-116.474048572, 6.35, -29.182020138), (0, -1, 0)), mode=Mode.SUBTRACT)

    # MatrizL1: read off the stored shape, not the designer's step
    # MatrizL1: loft between two sections, ruled curve by curve
    matrizl1_from = [
        Edge.make_three_point_arc((22.65, 0, 2.712370176), (21, 1.65, 2.712370176), (19.35, 0, 2.712370176)),
        Edge.make_three_point_arc((19.35, 0, 2.712370176), (21, -1.65, 2.712370176), (22.65, 0, 2.712370176)),
    ]
    matrizl1_to = [
        Edge.make_three_point_arc((22.65, 0, 7.500099893), (21, 1.65, 7.500099893), (19.35, 0, 7.500099893)),
        Edge.make_three_point_arc((19.35, 0, 7.500099893), (21, -1.65, 7.500099893), (22.65, 0, 7.500099893)),
    ]
    matrizl1 = Solid(Shell([*[Face.make_surface_from_curves(matrizl1_from[k], matrizl1_to[k]) for k in range(2)], Face(Wire(matrizl1_from)), Face(Wire(matrizl1_to))]))
    add(matrizl1, mode=Mode.SUBTRACT)

    # MatrizL1 2: loft between two sections, ruled curve by curve
    matrizl1_2_from = [
        Edge.make_three_point_arc((21, 2.712383518, 1.65), (22.65, 2.712383518, 0), (21, 2.712383518, -1.65)),
        Edge.make_three_point_arc((21, 2.712383518, -1.65), (19.35, 2.712383518, 0), (21, 2.712383518, 1.65)),
    ]
    matrizl1_2_to = [
        Edge.make_three_point_arc((21, 7.50002686, 1.65), (22.65, 7.50002686, 0), (21, 7.50002686, -1.65)),
        Edge.make_three_point_arc((21, 7.50002686, -1.65), (19.35, 7.50002686, 0), (21, 7.50002686, 1.65)),
    ]
    matrizl1_2 = Solid(Shell([*[Face.make_surface_from_curves(matrizl1_2_from[k], matrizl1_2_to[k]) for k in range(2)], Face(Wire(matrizl1_2_from)), Face(Wire(matrizl1_2_to))]))
    add(matrizl1_2, mode=Mode.SUBTRACT)


solid = part.part
